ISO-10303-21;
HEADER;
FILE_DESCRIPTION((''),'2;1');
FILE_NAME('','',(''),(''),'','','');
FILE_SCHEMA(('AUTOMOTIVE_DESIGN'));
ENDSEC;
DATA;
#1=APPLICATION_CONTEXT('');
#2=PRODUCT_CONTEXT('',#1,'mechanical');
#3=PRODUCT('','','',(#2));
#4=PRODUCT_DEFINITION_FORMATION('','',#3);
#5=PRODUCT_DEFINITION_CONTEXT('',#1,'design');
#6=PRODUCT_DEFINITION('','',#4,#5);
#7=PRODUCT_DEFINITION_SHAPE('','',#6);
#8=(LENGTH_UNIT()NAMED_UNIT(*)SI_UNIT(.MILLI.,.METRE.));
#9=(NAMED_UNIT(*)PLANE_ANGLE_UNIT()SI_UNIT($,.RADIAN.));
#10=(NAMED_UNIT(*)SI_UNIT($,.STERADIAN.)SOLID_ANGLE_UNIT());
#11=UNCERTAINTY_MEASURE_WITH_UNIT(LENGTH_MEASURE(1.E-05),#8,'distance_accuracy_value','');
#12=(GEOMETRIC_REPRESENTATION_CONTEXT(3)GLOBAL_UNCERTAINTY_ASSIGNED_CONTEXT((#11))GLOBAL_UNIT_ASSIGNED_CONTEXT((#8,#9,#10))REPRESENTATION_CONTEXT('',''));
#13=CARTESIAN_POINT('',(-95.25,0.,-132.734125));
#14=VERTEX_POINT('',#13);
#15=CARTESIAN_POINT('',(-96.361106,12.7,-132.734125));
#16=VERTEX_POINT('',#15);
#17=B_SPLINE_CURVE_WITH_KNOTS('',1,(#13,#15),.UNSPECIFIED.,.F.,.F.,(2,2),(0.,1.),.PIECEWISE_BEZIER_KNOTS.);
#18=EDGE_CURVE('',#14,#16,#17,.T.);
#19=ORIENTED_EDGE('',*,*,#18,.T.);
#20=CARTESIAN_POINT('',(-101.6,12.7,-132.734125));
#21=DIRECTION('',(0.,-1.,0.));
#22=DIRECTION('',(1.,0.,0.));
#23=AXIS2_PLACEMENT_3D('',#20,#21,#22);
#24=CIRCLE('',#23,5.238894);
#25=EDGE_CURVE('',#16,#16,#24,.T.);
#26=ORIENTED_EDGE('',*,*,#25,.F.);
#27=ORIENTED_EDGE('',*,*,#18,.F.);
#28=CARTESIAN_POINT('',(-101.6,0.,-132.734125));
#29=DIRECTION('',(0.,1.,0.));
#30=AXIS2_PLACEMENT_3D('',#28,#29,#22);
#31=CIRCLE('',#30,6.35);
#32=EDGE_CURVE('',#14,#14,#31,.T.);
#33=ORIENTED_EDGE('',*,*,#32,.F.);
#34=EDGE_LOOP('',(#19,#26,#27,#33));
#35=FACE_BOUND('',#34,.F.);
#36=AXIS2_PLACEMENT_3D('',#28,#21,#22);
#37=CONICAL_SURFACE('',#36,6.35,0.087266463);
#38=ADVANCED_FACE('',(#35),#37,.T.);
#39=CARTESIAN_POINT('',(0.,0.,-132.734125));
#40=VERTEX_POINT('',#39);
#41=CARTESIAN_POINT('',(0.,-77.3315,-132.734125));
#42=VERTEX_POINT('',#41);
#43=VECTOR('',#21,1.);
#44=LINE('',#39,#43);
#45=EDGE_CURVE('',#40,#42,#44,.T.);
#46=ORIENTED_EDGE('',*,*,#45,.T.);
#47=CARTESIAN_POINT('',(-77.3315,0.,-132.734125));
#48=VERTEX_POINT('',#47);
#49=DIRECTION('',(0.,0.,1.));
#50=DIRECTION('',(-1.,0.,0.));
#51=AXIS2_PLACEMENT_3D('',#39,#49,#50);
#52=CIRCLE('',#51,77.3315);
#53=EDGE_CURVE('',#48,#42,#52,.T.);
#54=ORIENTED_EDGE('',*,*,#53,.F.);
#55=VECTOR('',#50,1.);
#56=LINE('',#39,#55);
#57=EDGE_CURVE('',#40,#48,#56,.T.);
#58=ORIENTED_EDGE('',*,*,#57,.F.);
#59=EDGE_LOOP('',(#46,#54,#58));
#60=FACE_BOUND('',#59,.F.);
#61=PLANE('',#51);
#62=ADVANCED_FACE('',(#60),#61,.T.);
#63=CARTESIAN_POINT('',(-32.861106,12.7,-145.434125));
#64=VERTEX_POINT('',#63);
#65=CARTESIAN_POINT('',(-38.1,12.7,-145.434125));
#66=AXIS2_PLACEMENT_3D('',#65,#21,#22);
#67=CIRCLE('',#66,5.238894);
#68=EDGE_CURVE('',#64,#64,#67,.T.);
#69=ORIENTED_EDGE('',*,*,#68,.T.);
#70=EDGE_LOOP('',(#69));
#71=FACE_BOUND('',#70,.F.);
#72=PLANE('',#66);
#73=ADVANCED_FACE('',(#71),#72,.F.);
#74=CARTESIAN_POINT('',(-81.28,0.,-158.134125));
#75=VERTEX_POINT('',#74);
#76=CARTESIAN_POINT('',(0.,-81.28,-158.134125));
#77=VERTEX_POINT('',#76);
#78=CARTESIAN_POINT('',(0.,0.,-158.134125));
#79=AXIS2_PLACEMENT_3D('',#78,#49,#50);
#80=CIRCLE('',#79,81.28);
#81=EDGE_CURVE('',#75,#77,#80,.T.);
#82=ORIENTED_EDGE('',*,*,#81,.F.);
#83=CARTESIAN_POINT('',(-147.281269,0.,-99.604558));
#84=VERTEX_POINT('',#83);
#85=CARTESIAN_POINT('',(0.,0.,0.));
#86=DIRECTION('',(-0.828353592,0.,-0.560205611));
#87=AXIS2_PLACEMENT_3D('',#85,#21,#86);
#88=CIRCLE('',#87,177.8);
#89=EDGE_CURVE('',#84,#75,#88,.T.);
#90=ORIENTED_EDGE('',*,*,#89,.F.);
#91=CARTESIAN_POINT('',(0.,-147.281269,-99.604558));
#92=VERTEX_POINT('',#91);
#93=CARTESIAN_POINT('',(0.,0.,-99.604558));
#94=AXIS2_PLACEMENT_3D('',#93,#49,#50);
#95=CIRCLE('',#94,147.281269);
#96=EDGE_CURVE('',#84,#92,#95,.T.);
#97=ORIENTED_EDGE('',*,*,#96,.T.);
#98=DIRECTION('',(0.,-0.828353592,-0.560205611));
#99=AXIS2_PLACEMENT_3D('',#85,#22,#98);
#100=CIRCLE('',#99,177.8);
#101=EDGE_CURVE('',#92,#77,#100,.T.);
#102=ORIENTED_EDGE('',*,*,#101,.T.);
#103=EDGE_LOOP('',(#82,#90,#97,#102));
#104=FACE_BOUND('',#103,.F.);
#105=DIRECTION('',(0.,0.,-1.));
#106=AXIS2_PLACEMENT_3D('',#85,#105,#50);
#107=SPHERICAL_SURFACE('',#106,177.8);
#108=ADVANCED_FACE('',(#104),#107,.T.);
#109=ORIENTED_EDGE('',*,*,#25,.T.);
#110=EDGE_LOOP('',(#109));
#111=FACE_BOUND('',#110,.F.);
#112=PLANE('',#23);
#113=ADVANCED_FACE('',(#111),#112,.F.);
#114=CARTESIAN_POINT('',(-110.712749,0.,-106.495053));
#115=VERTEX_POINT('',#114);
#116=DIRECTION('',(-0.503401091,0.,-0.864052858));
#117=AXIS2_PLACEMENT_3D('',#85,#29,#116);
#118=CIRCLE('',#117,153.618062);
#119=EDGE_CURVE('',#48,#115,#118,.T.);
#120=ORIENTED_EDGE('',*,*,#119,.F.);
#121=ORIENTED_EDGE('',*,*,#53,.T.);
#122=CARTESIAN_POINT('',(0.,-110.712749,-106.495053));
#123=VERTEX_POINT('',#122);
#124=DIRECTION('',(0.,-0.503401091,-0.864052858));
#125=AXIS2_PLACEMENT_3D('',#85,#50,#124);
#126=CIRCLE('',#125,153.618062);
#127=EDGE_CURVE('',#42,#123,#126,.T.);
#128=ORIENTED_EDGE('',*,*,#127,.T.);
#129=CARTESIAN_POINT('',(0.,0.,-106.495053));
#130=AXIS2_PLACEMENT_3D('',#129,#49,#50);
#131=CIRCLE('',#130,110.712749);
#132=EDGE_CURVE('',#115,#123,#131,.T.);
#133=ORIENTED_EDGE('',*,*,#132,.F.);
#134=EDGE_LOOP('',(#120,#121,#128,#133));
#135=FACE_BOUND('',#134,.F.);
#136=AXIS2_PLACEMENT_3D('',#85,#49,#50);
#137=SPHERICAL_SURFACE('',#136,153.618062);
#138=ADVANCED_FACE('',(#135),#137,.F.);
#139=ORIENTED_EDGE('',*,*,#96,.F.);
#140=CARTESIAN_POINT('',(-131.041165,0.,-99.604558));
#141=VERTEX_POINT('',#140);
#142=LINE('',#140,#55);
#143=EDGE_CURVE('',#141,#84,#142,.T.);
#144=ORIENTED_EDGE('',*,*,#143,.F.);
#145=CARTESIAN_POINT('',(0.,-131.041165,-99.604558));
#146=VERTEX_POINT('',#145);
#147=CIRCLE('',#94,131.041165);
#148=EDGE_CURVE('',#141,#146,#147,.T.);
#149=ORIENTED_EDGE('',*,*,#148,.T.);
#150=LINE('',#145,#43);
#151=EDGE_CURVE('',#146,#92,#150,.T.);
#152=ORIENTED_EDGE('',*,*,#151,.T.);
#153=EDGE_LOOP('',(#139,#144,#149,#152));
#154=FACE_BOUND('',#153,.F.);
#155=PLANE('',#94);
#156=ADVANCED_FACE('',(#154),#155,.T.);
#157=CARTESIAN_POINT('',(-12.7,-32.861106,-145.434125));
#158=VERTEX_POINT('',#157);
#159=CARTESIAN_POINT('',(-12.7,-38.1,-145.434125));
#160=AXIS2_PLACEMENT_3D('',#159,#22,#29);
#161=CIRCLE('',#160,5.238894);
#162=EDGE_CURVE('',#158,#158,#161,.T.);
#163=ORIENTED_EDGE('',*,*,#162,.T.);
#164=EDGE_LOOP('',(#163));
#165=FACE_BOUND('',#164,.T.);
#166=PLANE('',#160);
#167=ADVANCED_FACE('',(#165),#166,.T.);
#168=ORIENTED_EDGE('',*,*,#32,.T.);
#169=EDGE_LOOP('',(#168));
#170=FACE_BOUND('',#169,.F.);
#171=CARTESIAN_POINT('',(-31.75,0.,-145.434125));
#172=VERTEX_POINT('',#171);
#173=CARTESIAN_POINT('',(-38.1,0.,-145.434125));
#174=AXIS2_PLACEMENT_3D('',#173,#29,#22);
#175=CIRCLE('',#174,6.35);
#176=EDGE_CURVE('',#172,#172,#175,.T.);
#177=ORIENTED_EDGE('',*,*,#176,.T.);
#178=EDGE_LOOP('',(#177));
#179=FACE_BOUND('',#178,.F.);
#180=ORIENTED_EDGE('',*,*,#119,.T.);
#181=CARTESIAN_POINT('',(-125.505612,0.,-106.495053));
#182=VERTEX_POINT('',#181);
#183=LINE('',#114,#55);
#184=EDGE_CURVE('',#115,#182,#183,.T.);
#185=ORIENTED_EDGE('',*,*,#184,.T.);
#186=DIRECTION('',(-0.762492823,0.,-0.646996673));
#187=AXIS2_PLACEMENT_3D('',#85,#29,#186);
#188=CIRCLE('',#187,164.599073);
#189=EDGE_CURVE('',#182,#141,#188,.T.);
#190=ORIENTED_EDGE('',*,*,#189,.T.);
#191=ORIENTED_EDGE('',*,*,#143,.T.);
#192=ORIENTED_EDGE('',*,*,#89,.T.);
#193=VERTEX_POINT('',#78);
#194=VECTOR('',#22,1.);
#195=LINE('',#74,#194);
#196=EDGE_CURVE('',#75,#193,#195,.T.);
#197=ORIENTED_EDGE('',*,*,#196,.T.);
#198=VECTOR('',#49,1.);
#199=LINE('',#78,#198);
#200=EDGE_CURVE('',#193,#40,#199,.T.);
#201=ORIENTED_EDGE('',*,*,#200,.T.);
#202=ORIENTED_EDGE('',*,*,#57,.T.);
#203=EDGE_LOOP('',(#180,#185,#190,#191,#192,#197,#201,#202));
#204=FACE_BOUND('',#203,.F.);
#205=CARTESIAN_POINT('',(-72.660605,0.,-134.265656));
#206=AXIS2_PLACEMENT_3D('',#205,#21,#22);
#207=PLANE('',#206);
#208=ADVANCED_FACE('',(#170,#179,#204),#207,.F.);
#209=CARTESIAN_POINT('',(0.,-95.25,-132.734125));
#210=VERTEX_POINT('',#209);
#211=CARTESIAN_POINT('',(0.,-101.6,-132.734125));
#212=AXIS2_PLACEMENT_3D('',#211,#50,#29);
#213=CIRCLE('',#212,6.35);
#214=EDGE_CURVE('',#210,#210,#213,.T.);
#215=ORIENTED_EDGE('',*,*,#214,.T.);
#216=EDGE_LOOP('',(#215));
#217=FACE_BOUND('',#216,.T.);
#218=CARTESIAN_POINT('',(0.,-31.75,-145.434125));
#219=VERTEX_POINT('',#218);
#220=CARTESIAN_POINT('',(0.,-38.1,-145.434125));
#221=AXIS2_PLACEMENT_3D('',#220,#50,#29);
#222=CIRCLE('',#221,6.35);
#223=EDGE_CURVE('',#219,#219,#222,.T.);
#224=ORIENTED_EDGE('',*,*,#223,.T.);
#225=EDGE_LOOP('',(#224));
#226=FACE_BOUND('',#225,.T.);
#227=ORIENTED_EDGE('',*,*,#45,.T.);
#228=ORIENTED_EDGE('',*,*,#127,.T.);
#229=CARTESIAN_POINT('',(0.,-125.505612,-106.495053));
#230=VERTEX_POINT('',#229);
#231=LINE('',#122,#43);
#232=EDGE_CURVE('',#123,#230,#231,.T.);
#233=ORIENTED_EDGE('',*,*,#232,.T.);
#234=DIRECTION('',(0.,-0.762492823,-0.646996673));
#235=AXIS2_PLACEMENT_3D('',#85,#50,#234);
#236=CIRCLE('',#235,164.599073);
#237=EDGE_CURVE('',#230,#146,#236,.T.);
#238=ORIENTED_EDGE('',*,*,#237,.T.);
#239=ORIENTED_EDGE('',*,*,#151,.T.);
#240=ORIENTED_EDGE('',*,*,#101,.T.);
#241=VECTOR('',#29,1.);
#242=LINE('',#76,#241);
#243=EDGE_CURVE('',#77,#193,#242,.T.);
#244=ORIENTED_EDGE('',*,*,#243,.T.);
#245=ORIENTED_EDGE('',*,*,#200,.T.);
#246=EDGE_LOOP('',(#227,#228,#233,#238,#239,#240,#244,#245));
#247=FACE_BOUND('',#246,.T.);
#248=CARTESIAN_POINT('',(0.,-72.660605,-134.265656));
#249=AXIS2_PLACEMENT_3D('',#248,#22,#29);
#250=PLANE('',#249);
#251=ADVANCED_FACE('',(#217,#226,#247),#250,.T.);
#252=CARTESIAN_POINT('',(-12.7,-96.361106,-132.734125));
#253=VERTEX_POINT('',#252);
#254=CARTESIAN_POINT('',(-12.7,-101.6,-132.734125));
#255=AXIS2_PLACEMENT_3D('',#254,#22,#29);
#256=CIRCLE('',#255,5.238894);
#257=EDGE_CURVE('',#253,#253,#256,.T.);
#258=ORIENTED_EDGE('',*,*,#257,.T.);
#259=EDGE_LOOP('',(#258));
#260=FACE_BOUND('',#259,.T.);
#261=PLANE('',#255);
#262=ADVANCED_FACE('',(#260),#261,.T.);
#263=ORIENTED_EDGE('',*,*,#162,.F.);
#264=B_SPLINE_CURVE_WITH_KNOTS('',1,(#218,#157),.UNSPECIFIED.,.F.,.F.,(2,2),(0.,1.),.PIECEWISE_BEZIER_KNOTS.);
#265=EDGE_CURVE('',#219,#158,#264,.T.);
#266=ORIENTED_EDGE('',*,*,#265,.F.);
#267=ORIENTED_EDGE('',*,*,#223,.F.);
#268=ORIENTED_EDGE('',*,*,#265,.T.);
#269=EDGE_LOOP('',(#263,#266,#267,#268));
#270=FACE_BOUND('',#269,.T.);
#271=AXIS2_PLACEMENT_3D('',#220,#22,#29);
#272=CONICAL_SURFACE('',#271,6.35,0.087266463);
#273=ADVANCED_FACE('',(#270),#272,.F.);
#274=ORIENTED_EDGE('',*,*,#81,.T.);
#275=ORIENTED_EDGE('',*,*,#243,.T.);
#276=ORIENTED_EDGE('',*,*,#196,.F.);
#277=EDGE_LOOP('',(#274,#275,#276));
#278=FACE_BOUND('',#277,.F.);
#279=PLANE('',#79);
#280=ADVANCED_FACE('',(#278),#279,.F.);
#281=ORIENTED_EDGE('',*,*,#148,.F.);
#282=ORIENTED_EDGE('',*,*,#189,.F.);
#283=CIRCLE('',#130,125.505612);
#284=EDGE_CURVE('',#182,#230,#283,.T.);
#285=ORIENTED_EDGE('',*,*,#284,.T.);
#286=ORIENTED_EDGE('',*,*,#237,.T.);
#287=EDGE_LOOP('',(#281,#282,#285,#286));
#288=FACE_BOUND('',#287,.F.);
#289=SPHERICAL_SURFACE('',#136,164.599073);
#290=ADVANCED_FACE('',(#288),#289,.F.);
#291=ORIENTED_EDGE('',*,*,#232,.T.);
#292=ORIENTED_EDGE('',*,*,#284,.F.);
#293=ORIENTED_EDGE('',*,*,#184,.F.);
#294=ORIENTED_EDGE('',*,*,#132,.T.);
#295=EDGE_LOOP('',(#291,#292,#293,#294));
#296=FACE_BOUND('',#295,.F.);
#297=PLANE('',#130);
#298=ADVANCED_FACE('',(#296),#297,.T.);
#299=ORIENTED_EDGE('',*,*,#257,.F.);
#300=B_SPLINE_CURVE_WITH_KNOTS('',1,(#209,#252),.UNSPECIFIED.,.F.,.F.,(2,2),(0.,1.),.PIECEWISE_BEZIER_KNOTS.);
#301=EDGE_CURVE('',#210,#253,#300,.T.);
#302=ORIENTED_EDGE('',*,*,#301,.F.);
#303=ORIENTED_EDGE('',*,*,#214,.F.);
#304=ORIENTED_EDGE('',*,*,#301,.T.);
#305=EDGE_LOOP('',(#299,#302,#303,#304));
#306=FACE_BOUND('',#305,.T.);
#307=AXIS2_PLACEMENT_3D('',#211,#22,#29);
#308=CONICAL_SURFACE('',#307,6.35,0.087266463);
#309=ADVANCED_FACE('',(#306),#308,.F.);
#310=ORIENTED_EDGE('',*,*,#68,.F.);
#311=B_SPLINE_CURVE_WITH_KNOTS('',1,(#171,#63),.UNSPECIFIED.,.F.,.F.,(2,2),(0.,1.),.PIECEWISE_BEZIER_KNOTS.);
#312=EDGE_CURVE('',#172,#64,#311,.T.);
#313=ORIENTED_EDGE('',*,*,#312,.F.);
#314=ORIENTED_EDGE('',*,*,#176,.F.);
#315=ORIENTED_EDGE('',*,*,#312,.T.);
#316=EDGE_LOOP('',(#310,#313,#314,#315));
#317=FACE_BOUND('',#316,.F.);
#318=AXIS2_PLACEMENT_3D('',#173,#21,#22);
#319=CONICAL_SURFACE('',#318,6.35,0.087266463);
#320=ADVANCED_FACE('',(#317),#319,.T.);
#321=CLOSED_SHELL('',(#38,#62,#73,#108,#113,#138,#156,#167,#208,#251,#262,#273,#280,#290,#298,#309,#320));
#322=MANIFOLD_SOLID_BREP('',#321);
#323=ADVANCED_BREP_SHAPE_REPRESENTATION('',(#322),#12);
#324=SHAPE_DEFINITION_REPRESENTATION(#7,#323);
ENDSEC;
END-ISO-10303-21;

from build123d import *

# Parameters (mm, degrees)
F1_ANGLE = 90
F3_R     = 6.35
F4_DEPTH = 12.7
F4_TAPER = 5
F5_R     = 6.35
F6_DEPTH = 12.7
F6_TAPER = 5


# Not quite as in the source:
# - a feature of the source that left no trace in its solid (it failed there, or was rolled back) is left out


with BuildPart() as f1:
    # F0 (on Front) → F1 (revolve)
    with BuildSketch(Plane.XZ):
        with BuildLine():
            Line((-81.28, -158.1341253493), (0, -158.1341253493))
            Line((0, -158.1341253493), (0, -132.7341253493))
            Line((0, -132.7341253493), (-77.331499878, -132.7341253493))
            ThreePointArc((-77.331499878, -132.7341253493), (-94.9330399433, -120.7734525165), (-110.7127485092, -106.4950525761))
            Line((-110.7127485092, -106.4950525761), (-125.4562139511, -106.4950525761))
            Line((-125.4562139511, -106.4950525761), (-125.5056119373, -106.4950525761))
            ThreePointArc((-125.5056119373, -106.4950525761), (-128.3196475153, -103.0869677141), (-131.041165147, -99.6045575657))
            Line((-131.041165147, -99.6045575657), (-147.2812687077, -99.6045575657))
            ThreePointArc((-147.2812687077, -99.6045575657), (-117.9681777623, -133.0276250839), (-81.28, -158.1341253493))
        make_face()
    revolve(axis=Axis((0, 0, -145.4341253493), (0, 0, 1)), revolution_arc=F1_ANGLE)

    # F3 (on face) → F4 (join)
    with BuildSketch(Plane.XZ):
        with Locations((-101.6, -132.7341253493)):
            Circle(F3_R)
        with Locations((-38.1, -145.4341253493)):
            Circle(F3_R)
    extrude(amount=-F4_DEPTH, taper=F4_TAPER)

    # F5 (on face) → F6 (cut)
    with BuildSketch(Plane.YZ):
        with Locations((-101.6, -132.7341253493)):
            Circle(F5_R)
        with Locations((-38.1, -145.4341253493)):
            Circle(F5_R)
    extrude(amount=-F6_DEPTH, taper=F6_TAPER, mode=Mode.SUBTRACT)


solid = f1.part
